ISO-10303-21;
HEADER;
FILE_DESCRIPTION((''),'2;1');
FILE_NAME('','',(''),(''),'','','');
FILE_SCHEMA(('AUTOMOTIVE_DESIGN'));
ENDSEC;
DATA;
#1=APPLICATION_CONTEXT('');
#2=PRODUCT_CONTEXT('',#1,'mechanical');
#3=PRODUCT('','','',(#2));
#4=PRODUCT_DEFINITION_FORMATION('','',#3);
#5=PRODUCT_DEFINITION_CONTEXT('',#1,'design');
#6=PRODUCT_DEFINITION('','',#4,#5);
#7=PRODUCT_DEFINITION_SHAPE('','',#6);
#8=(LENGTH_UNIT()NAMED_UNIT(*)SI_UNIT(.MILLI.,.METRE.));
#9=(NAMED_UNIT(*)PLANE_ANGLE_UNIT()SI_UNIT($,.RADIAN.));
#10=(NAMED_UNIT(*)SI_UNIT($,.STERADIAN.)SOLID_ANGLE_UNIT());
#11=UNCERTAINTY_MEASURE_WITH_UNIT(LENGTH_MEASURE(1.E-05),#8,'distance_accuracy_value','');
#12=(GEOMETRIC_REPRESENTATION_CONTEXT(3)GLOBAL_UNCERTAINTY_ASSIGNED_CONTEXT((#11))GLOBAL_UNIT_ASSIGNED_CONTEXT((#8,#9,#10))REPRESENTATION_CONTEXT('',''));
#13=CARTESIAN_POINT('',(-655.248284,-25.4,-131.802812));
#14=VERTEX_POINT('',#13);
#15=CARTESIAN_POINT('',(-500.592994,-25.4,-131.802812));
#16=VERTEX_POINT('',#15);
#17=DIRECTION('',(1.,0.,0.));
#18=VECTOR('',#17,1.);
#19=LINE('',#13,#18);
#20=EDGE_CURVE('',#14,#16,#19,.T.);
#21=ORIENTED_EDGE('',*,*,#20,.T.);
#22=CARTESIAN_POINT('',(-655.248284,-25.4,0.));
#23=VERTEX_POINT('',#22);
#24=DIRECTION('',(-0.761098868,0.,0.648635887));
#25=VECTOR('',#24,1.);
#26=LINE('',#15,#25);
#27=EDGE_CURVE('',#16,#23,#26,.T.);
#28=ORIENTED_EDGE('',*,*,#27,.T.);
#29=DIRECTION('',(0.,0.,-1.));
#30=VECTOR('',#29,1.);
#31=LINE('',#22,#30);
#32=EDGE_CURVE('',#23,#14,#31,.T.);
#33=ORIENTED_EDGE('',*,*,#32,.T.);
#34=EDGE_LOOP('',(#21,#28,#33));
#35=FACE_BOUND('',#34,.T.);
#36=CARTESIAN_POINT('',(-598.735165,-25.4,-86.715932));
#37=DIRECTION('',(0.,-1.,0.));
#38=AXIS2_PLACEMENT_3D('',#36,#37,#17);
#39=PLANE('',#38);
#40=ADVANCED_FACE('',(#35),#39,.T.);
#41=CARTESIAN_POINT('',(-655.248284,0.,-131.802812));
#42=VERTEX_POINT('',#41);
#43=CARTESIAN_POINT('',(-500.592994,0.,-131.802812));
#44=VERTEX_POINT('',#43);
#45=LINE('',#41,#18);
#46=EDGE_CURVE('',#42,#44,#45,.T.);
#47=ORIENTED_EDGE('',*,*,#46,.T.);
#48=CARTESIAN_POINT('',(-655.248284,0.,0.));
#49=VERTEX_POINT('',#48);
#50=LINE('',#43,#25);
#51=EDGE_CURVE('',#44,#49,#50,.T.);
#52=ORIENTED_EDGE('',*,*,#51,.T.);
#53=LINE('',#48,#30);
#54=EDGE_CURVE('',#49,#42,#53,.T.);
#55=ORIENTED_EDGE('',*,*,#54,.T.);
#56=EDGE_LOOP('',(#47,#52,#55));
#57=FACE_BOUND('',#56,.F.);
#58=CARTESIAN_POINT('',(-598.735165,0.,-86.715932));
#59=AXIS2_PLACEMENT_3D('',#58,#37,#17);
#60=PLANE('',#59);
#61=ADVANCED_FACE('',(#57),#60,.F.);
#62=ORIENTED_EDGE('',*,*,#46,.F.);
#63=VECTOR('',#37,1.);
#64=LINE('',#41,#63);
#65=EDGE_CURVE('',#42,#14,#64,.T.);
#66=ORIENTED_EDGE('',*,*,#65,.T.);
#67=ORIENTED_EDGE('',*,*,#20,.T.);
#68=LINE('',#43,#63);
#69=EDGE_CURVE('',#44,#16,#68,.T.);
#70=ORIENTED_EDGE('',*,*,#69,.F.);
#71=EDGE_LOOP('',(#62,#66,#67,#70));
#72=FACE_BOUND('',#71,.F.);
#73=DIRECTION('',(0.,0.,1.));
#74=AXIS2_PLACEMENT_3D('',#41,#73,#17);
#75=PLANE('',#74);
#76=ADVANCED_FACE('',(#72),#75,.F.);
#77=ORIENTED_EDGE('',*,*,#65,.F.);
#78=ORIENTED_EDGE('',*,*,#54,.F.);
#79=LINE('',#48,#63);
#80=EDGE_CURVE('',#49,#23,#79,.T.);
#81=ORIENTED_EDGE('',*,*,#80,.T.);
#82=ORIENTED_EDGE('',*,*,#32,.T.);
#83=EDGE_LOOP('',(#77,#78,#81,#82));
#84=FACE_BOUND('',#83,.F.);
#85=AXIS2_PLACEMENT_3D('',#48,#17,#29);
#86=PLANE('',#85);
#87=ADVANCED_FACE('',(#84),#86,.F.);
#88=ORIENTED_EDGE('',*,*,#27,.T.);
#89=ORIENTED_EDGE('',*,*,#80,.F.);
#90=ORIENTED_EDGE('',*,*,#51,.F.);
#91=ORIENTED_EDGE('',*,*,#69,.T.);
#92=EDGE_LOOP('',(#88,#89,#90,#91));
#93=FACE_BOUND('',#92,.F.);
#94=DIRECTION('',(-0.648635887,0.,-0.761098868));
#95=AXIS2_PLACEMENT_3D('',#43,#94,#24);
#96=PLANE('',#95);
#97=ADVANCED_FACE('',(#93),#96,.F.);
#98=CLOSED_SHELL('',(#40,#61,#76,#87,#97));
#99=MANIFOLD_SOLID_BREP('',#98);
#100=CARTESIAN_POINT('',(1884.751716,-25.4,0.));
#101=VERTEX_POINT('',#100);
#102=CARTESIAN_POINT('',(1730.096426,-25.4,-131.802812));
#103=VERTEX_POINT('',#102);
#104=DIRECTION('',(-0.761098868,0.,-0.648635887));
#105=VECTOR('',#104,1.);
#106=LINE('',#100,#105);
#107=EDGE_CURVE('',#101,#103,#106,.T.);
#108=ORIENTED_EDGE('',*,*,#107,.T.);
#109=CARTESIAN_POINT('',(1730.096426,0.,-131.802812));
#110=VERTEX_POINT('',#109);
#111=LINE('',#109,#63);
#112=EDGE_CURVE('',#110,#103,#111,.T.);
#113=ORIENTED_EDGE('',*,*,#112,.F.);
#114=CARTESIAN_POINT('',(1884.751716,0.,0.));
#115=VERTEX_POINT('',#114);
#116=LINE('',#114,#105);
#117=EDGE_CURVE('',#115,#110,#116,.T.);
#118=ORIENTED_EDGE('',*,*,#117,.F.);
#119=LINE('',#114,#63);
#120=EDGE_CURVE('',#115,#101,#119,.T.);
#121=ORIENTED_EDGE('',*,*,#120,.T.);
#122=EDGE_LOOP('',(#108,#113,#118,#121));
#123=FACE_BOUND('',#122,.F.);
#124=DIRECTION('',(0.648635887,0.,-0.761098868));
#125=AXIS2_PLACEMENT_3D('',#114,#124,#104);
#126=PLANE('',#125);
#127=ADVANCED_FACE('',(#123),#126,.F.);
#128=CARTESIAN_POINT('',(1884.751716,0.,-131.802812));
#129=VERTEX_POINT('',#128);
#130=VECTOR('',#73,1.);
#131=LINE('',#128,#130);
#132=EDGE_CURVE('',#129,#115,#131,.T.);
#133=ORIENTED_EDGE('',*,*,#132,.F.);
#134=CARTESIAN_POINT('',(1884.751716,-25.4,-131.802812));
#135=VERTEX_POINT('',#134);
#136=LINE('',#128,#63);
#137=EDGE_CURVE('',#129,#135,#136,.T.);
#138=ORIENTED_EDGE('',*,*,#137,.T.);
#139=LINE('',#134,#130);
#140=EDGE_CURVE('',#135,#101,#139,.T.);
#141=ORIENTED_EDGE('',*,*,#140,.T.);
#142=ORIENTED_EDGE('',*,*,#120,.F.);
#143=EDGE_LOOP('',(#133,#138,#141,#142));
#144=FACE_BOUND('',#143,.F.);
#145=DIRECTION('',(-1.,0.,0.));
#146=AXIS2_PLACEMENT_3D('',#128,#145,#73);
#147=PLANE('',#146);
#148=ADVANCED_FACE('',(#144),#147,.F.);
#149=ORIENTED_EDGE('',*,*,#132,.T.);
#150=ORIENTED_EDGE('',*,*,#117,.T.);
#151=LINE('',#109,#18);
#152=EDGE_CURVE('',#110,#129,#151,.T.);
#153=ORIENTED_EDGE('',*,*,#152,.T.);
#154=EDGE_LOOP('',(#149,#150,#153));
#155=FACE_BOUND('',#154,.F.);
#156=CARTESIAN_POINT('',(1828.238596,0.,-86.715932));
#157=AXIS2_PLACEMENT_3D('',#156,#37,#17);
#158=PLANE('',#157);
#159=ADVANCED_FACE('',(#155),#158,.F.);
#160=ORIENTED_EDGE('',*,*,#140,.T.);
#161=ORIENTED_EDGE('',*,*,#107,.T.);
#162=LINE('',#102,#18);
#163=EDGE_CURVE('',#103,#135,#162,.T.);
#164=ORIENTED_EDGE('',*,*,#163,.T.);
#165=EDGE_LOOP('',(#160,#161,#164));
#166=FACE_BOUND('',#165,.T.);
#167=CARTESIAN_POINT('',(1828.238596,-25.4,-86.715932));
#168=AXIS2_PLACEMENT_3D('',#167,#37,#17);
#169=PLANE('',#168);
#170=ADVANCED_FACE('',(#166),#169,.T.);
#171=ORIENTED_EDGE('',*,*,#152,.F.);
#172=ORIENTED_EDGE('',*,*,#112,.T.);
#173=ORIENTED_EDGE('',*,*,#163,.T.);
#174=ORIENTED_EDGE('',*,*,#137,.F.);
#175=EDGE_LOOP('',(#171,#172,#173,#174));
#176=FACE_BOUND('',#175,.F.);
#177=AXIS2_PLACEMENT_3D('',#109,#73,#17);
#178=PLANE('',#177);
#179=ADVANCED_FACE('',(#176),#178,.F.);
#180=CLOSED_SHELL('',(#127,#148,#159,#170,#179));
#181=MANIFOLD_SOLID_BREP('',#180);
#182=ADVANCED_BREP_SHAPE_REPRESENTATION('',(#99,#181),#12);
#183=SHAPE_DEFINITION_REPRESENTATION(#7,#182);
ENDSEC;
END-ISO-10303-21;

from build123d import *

# Parameters (mm, degrees)
F7_DEPTH = 25.4
F8_DEPTH = 25.4


# Not quite as in the source:
# - the program builds the solid bodies; features that only make, move or delete a surface that nothing else refers to are left out


with BuildPart() as f7:
    # F0 (on Front) → F7 (new body)
    with BuildSketch(Plane.XZ):
        Polygon((1884.7517156601, 0), (1730.0964257692, -131.8028122187), (1884.7517156601, -131.8028122187), align=None)
    extrude(amount=F7_DEPTH)


with BuildPart() as f8:
    # F0 (on Front) → F8 (new body)
    with BuildSketch(Plane.XZ):
        Polygon((-655.2482843399, 0), (-655.2482843399, -131.8028122187), (-500.592994449, -131.8028122187), align=None)
    extrude(amount=F8_DEPTH)


solid = Compound([f7.part, f8.part])
